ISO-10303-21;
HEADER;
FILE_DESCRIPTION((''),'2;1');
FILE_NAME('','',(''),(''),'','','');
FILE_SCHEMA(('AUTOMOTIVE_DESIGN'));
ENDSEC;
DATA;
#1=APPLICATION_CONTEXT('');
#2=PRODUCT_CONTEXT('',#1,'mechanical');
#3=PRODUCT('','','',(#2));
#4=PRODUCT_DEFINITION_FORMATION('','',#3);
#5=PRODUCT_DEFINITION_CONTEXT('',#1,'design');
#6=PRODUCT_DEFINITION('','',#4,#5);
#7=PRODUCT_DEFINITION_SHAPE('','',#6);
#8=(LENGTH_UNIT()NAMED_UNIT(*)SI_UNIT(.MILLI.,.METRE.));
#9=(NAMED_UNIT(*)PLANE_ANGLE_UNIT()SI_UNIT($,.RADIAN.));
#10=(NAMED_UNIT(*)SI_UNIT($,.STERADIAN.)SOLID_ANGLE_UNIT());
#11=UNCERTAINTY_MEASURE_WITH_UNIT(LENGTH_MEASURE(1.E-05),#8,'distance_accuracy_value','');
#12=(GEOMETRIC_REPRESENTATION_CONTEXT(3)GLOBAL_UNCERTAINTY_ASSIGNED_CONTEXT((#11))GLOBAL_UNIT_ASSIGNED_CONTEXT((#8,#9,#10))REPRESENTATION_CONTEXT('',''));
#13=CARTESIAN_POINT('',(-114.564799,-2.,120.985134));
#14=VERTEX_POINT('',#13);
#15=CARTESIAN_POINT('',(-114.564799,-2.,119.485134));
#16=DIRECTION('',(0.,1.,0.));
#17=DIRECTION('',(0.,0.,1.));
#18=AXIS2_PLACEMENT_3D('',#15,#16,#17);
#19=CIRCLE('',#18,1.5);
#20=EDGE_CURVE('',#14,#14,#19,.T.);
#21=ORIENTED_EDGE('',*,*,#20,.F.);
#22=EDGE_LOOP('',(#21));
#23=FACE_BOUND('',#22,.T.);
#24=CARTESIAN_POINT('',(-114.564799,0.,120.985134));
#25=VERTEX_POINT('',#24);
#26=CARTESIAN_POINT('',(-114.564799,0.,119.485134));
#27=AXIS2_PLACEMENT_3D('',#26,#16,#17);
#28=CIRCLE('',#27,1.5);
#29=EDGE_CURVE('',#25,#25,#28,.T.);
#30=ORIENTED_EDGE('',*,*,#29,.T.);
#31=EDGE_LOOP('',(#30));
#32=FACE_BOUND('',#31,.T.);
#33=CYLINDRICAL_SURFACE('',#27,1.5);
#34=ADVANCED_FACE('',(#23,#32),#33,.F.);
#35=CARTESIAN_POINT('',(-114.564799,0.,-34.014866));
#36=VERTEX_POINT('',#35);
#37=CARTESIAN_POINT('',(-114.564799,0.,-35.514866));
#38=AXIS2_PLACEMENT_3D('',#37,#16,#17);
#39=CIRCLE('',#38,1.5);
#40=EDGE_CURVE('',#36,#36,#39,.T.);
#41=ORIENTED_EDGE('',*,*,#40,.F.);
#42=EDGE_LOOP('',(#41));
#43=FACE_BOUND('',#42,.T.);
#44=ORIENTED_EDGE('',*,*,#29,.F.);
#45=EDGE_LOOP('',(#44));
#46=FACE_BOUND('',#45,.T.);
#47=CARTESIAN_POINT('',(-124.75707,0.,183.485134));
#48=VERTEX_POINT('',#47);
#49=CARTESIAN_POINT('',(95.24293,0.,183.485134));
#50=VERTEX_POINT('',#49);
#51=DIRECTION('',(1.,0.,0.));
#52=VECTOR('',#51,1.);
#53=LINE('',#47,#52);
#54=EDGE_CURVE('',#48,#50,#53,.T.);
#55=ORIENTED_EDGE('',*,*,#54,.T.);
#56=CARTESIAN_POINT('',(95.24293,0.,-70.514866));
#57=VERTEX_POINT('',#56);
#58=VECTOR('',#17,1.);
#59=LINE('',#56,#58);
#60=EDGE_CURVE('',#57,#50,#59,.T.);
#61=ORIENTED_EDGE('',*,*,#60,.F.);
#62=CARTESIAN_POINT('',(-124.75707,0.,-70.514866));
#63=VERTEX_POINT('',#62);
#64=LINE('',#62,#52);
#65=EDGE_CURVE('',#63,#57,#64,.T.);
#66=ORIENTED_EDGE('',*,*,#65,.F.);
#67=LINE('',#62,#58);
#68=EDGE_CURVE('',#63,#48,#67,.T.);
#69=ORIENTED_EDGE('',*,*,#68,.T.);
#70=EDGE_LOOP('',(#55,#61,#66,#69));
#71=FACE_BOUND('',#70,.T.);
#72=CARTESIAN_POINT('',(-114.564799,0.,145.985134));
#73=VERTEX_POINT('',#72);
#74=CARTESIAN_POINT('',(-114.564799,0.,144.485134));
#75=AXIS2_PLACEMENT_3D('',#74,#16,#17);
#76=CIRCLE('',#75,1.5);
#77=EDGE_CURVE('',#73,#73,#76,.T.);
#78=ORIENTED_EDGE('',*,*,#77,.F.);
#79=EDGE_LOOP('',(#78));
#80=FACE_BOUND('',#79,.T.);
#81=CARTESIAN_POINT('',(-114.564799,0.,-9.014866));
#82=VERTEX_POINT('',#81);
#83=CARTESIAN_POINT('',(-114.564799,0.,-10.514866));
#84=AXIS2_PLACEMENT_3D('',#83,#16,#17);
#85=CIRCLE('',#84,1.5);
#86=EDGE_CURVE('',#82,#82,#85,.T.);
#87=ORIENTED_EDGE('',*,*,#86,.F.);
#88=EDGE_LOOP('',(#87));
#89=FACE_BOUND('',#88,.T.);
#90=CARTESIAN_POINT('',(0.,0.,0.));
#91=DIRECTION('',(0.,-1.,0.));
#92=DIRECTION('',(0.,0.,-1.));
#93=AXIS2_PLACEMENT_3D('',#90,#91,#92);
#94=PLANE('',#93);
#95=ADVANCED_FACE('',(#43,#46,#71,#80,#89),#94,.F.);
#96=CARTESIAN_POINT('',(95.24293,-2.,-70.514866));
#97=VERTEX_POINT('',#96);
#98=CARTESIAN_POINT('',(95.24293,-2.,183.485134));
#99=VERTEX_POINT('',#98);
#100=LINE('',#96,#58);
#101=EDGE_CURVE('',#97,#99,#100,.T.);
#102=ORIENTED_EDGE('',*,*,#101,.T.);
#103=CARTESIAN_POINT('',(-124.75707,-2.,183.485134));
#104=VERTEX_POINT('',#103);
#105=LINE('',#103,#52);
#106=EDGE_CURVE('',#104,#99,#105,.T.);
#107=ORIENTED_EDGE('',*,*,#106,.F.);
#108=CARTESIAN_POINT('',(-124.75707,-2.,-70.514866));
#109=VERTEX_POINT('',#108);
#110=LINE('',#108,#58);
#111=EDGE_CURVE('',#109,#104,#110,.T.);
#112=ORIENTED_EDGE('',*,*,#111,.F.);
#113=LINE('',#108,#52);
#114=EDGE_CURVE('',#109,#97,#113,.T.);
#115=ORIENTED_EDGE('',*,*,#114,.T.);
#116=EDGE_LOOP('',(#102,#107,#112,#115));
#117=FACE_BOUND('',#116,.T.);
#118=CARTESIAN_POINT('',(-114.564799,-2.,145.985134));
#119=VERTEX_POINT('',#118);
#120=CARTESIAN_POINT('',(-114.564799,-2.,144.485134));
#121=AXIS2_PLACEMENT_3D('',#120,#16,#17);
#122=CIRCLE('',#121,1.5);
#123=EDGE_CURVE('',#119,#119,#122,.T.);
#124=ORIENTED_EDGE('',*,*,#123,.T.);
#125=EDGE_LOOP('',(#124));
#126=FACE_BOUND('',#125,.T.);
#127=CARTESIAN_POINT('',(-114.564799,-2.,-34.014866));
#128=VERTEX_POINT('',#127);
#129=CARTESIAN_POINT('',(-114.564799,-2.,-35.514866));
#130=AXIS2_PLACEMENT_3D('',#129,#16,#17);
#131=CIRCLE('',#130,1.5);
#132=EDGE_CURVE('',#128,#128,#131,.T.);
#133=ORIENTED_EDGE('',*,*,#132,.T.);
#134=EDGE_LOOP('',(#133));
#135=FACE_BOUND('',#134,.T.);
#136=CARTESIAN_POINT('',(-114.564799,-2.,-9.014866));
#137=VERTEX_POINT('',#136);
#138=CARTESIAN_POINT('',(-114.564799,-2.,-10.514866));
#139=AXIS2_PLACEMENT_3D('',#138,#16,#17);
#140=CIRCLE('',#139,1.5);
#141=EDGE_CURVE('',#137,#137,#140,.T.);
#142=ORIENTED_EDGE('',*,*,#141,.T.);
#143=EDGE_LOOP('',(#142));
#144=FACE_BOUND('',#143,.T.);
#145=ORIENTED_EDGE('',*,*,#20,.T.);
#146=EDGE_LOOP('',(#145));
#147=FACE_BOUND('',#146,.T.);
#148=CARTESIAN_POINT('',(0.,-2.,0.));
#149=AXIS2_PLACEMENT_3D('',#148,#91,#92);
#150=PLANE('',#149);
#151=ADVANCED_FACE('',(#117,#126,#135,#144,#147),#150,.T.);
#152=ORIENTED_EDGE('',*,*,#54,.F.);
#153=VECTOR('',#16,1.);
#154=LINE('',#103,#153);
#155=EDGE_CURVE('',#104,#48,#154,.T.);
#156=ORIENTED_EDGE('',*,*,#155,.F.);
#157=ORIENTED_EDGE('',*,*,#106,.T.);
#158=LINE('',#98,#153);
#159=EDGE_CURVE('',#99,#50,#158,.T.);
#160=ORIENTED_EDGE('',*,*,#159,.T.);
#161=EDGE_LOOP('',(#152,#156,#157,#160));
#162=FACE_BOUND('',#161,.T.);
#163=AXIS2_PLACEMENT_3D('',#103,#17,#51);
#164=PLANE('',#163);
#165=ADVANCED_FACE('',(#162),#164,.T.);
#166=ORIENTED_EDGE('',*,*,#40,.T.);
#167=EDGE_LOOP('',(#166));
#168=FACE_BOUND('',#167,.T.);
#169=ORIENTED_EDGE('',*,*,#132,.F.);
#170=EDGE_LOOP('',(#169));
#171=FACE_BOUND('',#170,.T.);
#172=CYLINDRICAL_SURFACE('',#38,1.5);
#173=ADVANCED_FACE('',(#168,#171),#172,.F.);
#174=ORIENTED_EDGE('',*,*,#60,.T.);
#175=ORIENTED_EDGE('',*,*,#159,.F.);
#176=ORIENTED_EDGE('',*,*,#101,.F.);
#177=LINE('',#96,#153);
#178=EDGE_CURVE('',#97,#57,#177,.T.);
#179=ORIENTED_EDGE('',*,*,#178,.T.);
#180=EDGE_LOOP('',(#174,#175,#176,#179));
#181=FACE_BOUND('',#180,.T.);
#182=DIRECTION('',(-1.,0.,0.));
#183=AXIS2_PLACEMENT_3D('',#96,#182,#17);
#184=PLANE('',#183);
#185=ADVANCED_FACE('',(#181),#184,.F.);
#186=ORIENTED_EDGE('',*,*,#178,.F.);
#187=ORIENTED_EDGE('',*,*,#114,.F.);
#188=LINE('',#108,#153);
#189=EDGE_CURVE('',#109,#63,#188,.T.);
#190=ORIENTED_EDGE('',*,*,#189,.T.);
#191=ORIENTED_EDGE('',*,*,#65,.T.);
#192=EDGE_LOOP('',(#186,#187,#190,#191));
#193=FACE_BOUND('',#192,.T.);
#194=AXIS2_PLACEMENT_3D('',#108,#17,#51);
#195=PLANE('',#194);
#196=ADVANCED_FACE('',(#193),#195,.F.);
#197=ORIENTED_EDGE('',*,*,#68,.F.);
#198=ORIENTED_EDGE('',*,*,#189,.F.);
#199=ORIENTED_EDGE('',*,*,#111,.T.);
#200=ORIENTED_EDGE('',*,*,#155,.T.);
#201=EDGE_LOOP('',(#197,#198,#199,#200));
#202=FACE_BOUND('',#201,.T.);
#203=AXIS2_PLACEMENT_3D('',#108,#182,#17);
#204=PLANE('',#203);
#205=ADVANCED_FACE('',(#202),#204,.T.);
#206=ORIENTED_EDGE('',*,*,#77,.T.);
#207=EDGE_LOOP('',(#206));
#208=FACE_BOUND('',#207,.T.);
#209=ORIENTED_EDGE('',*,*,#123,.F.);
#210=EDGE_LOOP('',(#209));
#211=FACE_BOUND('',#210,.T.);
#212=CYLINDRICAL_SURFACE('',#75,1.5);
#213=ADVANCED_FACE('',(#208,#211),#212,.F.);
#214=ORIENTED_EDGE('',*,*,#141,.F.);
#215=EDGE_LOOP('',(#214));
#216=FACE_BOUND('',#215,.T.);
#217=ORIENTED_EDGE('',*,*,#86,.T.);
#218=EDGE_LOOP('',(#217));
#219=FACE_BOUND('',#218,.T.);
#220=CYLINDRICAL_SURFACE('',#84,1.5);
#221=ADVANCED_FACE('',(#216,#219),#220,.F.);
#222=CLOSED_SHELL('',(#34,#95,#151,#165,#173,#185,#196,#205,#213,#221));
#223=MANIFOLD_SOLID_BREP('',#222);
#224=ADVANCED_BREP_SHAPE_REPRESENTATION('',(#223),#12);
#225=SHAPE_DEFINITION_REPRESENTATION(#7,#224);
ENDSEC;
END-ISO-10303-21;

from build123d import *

# Parameters (mm, degrees)
SKETCH1_W               = 220
SKETCH1_H               = 254
BASE_FLANGE1_DEPTH      = 2
ADVANCEDHOLE2_START     = -2
ADVANCEDHOLE2_OUTLINE_R = 1.5
ADVANCEDHOLE2_DEPTH     = 2


# Read off the part's stored shape, not the designer's step: AdvancedHole2
# Sheet-metal steps are written as plain solids
with BuildPart() as part:
    # Sketch1 → Base-Flange1 (new body)
    with BuildSketch(Plane(origin=(0, 0, 0), x_dir=(1, 0, 0), z_dir=(0, 1, 0))):
        with Locations((-14.757070341, -56.485134155)):
            Rectangle(SKETCH1_W, SKETCH1_H)
    extrude(amount=-BASE_FLANGE1_DEPTH)

    # AdvancedHole2 outline → AdvancedHole2 (cut)
    with BuildSketch(Plane(origin=(0, 0, 0), x_dir=(1, 0, 0), z_dir=(0, 1, 0)).offset(ADVANCEDHOLE2_START)):
        with Locations((-114.564799313, -144.485134155)):
            Circle(ADVANCEDHOLE2_OUTLINE_R)
        with Locations((-114.564799313, -119.485134155)):
            Circle(ADVANCEDHOLE2_OUTLINE_R)
        with Locations((-114.564799313, 10.514865845)):
            Circle(ADVANCEDHOLE2_OUTLINE_R)
        with Locations((-114.564799313, 35.514865845)):
            Circle(ADVANCEDHOLE2_OUTLINE_R)
    extrude(amount=ADVANCEDHOLE2_DEPTH, mode=Mode.SUBTRACT)


solid = part.part
